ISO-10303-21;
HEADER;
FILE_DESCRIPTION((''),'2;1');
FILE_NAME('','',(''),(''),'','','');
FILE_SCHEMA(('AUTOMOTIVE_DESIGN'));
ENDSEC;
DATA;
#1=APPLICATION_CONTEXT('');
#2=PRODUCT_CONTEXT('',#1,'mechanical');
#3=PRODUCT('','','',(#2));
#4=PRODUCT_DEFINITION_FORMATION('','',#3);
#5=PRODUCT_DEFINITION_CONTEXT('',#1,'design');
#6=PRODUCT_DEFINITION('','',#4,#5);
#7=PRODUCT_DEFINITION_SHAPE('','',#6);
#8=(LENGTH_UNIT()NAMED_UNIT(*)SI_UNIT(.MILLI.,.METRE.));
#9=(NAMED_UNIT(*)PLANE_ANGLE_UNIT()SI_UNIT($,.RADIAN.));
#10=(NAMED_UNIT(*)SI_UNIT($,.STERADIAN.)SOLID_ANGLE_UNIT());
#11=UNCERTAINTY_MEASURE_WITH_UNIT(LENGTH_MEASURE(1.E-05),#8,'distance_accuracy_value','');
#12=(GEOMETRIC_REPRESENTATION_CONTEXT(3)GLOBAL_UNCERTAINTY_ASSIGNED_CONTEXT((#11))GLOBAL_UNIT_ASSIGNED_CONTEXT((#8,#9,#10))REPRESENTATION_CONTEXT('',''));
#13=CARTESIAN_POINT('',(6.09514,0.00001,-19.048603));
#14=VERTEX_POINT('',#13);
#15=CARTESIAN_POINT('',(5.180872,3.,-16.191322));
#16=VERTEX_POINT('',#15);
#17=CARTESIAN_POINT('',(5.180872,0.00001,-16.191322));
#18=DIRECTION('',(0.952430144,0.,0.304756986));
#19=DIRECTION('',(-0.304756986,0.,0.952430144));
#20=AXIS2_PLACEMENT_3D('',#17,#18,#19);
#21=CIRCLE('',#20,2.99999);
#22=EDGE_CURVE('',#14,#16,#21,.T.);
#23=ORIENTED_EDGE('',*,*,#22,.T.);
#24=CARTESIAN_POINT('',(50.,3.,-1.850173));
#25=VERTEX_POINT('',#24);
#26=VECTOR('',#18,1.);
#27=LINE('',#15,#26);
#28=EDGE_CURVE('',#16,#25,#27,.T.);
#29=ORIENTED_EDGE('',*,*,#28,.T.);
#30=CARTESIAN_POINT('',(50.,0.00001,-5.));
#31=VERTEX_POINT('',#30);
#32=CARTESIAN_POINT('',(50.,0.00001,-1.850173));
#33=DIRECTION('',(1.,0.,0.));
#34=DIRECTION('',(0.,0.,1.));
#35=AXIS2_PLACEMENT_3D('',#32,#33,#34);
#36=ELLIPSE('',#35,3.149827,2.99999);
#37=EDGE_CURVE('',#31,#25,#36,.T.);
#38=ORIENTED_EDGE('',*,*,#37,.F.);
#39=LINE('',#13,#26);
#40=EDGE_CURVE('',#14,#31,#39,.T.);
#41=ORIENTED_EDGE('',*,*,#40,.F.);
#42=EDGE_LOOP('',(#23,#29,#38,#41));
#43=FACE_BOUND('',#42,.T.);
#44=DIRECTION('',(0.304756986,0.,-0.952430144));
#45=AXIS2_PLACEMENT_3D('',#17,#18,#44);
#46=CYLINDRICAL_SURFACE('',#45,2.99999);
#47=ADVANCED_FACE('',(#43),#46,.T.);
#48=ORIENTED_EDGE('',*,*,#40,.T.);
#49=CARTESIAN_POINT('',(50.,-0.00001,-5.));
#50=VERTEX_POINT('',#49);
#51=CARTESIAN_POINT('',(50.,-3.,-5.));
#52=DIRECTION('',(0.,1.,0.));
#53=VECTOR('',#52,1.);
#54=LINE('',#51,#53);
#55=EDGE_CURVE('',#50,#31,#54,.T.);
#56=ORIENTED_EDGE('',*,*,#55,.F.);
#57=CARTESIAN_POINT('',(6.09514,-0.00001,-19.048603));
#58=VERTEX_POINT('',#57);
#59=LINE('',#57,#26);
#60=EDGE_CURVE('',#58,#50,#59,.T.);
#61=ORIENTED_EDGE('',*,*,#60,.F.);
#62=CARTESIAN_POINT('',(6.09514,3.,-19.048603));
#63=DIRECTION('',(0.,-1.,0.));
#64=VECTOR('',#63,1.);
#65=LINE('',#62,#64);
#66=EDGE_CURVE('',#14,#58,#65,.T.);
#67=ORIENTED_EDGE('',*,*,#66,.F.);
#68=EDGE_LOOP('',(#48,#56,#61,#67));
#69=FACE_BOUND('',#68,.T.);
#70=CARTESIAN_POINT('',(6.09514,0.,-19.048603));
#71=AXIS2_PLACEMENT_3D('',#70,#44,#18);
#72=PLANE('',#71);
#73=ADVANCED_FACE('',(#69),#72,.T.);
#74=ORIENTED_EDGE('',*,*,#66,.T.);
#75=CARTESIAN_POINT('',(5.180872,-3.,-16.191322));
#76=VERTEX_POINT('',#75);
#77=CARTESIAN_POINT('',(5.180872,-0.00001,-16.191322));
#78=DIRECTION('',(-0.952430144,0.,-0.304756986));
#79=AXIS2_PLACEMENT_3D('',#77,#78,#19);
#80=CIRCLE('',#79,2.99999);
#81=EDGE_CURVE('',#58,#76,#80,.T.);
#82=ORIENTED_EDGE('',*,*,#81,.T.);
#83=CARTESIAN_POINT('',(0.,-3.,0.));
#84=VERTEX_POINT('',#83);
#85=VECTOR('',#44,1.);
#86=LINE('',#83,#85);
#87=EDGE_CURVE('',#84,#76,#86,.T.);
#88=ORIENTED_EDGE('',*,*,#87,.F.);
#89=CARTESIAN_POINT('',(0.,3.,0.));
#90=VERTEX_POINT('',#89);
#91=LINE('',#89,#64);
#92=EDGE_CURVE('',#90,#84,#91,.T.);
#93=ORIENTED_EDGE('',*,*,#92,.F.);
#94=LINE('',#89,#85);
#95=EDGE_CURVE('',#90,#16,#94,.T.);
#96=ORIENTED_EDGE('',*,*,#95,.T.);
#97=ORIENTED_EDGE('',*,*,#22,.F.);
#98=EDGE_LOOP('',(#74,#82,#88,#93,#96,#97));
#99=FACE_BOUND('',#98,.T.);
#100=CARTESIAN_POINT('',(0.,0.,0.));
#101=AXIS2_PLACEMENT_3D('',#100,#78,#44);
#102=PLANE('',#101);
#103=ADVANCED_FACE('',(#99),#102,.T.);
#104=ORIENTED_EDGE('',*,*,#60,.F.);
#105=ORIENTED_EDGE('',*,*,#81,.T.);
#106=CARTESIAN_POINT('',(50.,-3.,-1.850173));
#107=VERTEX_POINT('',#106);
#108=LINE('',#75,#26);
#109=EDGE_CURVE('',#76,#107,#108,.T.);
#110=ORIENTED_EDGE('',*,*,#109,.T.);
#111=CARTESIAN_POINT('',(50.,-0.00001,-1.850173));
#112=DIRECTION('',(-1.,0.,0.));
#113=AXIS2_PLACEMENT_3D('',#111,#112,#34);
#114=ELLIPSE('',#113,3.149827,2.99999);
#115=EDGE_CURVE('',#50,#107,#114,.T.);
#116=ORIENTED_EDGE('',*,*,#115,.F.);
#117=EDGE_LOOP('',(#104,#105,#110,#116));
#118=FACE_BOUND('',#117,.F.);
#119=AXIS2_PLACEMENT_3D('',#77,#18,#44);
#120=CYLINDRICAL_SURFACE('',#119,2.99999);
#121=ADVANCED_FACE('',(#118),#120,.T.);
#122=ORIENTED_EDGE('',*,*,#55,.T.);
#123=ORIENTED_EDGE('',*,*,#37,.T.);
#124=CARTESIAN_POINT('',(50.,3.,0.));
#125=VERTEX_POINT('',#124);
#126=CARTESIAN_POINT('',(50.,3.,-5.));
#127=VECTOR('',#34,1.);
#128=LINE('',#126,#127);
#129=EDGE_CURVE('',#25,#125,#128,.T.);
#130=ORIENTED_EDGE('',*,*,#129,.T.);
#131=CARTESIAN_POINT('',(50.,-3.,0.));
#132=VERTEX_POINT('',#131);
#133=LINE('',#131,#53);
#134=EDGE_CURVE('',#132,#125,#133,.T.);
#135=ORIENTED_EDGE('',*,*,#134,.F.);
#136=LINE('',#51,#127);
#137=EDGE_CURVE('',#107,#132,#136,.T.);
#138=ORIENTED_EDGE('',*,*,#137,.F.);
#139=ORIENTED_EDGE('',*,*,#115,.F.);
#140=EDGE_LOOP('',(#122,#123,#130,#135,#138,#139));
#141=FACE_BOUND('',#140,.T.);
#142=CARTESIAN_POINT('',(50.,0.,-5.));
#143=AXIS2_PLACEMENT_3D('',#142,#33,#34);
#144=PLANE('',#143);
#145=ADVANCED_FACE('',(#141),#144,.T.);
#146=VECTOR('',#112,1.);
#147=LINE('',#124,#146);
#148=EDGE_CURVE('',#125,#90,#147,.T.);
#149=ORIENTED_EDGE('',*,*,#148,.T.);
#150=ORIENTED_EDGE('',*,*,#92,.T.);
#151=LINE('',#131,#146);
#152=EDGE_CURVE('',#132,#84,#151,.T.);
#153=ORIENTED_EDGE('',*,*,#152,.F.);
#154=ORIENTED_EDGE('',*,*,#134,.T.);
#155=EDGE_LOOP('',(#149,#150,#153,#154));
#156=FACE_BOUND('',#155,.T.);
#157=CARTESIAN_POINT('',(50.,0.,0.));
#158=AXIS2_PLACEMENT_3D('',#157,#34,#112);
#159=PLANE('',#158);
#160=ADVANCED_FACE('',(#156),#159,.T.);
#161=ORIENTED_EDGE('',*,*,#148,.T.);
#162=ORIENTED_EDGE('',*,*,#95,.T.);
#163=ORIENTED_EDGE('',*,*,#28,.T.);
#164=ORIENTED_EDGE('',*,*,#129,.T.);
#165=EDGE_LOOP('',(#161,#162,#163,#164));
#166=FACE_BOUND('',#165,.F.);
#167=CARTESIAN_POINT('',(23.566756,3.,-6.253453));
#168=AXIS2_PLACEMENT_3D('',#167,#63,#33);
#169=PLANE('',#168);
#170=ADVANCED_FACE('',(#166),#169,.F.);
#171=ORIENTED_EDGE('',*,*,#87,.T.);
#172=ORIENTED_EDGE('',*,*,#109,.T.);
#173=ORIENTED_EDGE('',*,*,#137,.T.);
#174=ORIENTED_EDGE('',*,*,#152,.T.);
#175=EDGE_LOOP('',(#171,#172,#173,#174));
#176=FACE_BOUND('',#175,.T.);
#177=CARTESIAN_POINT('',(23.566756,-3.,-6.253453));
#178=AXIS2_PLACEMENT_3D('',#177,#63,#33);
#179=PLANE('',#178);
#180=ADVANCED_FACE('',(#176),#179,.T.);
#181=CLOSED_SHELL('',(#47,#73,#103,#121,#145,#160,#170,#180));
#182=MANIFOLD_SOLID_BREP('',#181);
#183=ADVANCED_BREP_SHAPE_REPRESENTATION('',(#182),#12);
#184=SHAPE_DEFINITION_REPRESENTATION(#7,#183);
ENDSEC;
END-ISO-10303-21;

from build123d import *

# Parameters (mm, degrees)
F1_DEPTH = 3
F2_R     = 2.99999


# Not quite as in the source:
# - a fillet or chamfer is up to 0.001 mm smaller than in the source, because OpenCascade refuses the exact size


with BuildPart() as f1:
    # F0 (on Front) → F1 (new body, symmetric)
    with BuildSketch(Plane.XZ):
        Polygon((50, 0), (0, 0), (6.0951397114, -19.0486028857), (50, -5), align=None)
    extrude(amount=F1_DEPTH, both=True)

    # F2 (radius 3 in the source; OpenCascade refuses exactly that, so slightly less here)
    f2_edges = [f1.edges().sort_by_distance(p)[0] for p in [
        (28.04757, -3, -12.024301),
        (28.04757, 3, -12.024301),
    ]]
    fillet(f2_edges, radius=F2_R)


solid = f1.part
